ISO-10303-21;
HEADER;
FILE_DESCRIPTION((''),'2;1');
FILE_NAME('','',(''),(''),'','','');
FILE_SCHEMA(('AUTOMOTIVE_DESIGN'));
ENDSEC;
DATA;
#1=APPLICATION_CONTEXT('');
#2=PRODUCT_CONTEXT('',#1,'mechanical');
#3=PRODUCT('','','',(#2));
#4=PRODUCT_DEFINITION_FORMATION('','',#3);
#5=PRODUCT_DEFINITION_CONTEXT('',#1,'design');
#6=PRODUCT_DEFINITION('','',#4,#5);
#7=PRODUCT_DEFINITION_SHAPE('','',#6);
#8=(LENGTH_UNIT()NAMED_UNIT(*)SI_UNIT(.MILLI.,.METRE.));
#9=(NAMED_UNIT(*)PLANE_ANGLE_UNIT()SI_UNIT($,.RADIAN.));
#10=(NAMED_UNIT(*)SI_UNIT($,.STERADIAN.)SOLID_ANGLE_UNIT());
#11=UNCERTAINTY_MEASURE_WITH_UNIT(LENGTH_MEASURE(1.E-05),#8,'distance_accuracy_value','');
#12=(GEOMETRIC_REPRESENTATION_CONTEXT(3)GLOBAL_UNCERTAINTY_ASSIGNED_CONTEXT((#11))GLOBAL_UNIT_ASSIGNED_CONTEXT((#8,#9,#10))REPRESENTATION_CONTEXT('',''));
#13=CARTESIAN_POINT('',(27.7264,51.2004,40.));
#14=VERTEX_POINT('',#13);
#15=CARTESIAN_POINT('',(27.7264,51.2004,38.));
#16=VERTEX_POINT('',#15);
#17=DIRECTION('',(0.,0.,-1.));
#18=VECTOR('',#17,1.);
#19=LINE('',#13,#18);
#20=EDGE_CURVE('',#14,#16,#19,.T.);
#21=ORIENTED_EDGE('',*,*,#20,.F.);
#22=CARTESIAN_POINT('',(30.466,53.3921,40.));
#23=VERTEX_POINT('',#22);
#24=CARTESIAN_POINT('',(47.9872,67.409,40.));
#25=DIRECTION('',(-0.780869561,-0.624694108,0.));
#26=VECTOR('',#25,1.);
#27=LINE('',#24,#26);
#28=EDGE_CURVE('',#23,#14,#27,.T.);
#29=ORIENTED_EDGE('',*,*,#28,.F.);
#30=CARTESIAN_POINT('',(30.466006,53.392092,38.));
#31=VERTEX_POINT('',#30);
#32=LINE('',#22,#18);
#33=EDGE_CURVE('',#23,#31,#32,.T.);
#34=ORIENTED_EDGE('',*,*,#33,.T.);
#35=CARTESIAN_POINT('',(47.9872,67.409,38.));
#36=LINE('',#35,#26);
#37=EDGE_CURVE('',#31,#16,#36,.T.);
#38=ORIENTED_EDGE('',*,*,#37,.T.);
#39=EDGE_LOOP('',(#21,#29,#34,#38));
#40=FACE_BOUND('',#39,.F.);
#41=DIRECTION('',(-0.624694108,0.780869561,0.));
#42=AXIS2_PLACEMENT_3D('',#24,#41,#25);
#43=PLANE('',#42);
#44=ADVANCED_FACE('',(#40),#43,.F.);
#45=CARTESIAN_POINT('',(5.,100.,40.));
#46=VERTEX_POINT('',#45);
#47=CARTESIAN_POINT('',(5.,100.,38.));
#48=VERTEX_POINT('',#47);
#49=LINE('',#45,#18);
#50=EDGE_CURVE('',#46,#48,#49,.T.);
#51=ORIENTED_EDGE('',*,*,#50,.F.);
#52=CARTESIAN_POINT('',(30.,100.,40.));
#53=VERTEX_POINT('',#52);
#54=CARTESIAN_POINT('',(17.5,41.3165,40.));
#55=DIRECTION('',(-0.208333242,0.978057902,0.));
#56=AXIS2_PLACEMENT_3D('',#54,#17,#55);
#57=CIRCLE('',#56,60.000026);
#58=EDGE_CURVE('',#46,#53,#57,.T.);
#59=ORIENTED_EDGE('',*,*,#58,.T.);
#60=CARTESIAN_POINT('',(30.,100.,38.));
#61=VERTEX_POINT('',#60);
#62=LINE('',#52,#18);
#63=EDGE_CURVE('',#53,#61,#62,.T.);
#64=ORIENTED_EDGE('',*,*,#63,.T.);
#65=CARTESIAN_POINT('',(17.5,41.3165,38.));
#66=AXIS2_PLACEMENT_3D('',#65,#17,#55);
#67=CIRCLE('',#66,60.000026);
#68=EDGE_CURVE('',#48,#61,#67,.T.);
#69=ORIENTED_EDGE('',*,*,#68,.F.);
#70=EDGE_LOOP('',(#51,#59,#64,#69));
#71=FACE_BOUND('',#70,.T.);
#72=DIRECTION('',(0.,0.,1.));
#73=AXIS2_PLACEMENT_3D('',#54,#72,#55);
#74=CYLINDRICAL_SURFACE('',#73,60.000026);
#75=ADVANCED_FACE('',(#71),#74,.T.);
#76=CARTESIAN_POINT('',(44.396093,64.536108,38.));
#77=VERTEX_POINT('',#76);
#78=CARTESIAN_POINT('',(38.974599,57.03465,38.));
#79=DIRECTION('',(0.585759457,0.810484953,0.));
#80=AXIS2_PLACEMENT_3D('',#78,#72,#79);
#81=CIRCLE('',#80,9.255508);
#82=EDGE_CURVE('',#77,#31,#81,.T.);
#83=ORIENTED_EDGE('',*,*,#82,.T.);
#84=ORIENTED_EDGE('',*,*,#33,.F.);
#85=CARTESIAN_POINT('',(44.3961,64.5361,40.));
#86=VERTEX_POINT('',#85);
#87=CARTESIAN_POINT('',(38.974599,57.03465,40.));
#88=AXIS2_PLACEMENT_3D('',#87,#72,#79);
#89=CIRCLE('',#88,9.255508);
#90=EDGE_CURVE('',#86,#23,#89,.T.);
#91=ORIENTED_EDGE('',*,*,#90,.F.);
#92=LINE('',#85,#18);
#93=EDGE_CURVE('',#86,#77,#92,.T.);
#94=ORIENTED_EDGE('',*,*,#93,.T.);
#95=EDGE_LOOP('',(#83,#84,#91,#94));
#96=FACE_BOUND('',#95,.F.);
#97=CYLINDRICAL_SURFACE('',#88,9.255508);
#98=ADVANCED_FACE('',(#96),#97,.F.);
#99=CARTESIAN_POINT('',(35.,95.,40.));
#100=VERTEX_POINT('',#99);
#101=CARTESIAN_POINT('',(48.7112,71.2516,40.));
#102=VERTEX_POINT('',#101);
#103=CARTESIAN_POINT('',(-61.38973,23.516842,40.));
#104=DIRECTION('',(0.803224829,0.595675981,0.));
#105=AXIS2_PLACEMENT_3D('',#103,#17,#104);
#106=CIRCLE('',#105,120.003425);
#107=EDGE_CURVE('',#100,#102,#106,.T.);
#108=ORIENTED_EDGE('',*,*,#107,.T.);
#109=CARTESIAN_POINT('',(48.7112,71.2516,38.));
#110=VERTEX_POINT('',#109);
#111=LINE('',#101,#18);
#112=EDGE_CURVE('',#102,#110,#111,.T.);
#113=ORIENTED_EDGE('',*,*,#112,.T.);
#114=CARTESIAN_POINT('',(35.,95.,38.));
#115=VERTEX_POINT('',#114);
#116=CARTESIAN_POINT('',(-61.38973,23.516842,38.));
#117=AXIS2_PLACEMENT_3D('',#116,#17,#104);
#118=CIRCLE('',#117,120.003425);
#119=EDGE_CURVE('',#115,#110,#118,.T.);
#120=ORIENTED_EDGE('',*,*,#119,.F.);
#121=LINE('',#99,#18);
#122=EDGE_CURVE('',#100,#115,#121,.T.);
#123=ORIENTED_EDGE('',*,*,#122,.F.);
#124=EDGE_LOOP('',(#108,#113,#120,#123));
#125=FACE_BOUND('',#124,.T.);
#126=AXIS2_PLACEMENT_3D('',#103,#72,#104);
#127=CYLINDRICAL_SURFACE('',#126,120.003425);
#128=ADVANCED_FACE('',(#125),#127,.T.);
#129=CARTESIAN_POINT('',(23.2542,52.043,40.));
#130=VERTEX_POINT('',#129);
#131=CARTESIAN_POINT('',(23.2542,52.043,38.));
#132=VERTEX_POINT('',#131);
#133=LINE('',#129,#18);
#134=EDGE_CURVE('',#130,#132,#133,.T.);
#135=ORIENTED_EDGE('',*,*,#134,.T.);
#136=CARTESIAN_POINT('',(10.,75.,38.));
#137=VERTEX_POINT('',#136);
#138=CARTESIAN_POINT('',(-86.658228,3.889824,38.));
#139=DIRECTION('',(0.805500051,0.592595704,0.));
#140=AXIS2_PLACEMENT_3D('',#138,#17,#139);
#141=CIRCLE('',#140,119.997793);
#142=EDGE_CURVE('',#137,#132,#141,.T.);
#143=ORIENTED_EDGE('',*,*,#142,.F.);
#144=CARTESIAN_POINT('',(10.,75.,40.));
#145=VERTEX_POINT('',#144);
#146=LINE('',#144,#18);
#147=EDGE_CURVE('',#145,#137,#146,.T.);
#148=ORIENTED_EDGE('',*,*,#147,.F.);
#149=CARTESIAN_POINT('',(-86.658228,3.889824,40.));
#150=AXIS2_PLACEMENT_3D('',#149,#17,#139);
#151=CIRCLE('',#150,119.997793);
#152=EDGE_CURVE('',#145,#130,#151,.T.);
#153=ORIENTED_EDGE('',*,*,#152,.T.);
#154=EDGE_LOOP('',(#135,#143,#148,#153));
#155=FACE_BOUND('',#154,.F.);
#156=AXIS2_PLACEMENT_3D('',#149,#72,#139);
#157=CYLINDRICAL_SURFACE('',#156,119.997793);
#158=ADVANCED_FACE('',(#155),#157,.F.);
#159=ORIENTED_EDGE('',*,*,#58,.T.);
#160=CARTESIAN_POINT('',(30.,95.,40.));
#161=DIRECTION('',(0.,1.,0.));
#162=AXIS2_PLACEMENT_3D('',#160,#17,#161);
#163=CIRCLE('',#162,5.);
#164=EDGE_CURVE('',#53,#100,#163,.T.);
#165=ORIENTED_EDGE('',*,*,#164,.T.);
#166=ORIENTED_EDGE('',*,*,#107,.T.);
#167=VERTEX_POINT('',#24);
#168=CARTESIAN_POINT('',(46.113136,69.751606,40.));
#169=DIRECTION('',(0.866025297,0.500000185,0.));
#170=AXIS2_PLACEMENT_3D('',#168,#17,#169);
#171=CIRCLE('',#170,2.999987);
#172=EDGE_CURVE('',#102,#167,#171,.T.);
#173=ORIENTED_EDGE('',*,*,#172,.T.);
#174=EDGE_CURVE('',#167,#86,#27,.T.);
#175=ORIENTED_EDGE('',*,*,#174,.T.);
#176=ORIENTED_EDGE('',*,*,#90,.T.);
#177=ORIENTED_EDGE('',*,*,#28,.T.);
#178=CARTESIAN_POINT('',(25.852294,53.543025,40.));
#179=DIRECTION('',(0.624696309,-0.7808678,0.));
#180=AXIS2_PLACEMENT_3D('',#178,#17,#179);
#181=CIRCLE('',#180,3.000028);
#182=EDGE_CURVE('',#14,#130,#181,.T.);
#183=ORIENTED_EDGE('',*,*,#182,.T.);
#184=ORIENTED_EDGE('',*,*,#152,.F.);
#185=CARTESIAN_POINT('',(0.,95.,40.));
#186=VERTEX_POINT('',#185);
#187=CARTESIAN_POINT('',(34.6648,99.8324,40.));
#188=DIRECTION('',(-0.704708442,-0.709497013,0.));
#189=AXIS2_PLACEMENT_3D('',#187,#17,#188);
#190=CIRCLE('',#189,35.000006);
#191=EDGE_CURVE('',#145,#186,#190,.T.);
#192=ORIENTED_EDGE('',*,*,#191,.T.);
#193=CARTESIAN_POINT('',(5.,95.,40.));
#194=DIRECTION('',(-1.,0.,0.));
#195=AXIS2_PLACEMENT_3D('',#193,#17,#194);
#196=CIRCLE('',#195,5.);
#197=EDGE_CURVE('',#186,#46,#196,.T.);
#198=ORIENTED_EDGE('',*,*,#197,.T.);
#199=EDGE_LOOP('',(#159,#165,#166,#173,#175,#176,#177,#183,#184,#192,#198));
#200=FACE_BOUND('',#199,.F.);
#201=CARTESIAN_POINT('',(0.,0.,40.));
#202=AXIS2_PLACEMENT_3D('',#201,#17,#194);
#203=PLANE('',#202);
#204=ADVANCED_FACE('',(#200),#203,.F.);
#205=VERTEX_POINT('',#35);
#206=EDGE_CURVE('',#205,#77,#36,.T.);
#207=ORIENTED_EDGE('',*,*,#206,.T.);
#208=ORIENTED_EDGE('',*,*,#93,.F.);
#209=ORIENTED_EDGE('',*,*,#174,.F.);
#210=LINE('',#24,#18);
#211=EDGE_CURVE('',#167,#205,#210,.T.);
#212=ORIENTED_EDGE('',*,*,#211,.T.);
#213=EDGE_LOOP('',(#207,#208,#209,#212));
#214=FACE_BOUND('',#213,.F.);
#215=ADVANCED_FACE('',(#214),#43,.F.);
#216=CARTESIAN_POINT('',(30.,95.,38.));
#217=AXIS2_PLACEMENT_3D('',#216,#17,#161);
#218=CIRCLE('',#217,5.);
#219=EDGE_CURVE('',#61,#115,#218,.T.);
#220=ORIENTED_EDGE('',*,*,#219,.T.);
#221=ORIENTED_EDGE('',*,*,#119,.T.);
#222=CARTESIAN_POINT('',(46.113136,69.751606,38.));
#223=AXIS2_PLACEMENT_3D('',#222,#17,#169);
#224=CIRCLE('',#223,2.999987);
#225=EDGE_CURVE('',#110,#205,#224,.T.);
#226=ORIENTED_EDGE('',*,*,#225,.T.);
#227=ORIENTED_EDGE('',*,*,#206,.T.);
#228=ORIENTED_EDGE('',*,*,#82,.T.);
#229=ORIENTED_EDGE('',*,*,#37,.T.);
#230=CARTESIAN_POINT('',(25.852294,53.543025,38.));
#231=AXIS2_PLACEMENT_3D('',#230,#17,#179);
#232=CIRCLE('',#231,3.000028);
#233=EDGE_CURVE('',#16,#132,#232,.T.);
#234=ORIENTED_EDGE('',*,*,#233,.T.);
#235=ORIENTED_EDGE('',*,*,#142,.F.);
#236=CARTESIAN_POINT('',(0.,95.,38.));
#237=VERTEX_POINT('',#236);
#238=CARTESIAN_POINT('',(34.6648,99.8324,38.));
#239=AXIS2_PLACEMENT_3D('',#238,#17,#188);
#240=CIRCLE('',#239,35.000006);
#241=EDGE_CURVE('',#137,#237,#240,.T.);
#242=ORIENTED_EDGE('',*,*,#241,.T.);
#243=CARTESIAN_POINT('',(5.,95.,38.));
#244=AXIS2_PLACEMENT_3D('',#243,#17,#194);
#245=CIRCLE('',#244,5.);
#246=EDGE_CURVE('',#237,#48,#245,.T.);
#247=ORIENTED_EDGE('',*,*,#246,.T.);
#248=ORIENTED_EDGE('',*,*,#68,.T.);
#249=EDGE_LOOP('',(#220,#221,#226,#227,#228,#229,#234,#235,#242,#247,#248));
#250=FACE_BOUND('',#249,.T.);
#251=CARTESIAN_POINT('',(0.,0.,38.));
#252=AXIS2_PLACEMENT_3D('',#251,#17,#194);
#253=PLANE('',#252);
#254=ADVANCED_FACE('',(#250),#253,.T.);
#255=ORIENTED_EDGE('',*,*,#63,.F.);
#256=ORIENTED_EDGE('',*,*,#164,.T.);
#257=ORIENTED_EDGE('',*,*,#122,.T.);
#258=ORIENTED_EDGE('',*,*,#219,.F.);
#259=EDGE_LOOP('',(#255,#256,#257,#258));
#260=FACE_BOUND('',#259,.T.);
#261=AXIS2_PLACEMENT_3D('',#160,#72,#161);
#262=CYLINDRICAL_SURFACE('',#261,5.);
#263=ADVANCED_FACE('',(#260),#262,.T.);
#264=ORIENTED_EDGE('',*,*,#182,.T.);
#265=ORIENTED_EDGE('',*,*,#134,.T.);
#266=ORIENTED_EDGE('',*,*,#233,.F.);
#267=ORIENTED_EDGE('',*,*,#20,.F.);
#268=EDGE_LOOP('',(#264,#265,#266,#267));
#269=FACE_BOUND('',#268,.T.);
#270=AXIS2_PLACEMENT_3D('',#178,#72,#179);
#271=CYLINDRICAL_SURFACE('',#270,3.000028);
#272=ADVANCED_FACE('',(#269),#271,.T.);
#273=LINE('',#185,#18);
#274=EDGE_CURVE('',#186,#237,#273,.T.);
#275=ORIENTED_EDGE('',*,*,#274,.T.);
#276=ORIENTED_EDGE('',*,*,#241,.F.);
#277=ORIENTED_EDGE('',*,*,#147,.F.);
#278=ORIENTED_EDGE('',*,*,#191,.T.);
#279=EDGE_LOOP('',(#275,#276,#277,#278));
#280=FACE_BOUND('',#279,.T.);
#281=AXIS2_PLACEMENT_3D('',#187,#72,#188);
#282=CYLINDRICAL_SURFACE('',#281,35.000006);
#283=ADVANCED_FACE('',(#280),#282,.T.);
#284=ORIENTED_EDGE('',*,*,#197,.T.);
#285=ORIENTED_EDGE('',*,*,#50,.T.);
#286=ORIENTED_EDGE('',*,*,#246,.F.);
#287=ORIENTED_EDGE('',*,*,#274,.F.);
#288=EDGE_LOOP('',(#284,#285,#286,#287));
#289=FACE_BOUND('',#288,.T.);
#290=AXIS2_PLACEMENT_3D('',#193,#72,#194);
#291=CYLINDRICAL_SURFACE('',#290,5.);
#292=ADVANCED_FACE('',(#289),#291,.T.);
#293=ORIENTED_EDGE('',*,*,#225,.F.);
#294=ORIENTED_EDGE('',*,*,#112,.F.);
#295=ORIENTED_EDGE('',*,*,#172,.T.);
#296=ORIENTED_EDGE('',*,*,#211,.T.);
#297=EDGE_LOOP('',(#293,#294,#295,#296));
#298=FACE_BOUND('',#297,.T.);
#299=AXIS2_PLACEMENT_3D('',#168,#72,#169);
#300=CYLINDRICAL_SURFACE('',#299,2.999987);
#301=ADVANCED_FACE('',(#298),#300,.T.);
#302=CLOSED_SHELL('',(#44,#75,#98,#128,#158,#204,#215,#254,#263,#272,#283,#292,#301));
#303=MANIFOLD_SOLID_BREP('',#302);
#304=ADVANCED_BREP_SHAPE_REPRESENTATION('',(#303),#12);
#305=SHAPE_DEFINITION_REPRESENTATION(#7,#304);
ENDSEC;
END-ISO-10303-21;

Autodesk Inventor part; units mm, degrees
ref_plane "YZ Plane" through (0, 0, 0) normal (1, 0, 0) x (0, 1, 0)
ref_plane "Plano de trabajo14" through (0, 0, 40) normal (0, 0, 1) x (1, 0, 0)
ref_plane "Plano de trabajo15" through (0, 0, 40) normal (0, 0, -1) x (-1, 0, 0)
sketch "Boceto24" plane through (0, 0, 40) normal (0, 0, -1) x (-1, 0, 0)
  arc A0 (0, 95) -> (-5, 100) centre (-5, 95) ccw
  arc A1 (-30, 100) -> (-35, 95) centre (-30, 95) ccw
  arc A2 (-5, 100) -> (-30, 100) centre (-17.5, 41.3165) ccw
  arc A3 (-10, 75) -> (0, 95) centre (-34.6648, 99.8324) ccw
  line L0 (-47.9872, 67.409) -> (-27.7264, 51.2004)
  arc A4 (-27.7264, 51.2004) -> (-23.2542, 52.043) centre (-25.8523, 53.543) ccw
  arc A5 (-48.7112, 71.2516) -> (-47.9872, 67.409) centre (-46.1131, 69.7516) ccw
  arc A6 (-35, 95) -> (-48.7112, 71.2516) centre (61.3869, 23.5187) ccw
  arc A7 (-10, 75) -> (-23.2542, 52.043) centre (86.6601, 3.8886) ccw
  point P0 (0, 0)
  point P1 (0, 100)
  point P2 (-35, 100)
  point P3 (-25, 49.0192)
  point P4 (-50, 69.0192)
extrude "Extrusión16" add sketch "Boceto24" along normal blind 2
sketch "Boceto34" plane through (0, 0, 40) normal (0, 0, 1) x (1, 0, 0)
  line L0 (30.8918, 53.7327) -> (44.3961, 64.5361)
  line L1 (37.8568, 59.3047) -> (40.3278, 59.3047) construction
  line L2 (30.466, 53.3921) -> (44.3961, 64.5361)
  line L3 (30.466, 53.3921) -> (37.431, 58.9641)
  line L4 (37.431, 58.9641) -> (39.902, 58.9641) construction
  arc A0 (44.3961, 64.5361) -> (30.466, 53.3921) centre (38.9746, 57.0346) ccw
  point P0 (0, 0)
extrude "Extrusión26" cut sketch "Boceto34" against normal blind 10
equation "\"Radio_pliegue\" = Grosor"
equation "\"Anchura_desahogo_plegado\" = Grosor"
equation "\"Profundidad_desahogo_plegado\" = 0.5 * Grosor"
equation "\"Tamaño_destalonado\" = 4 * Grosor"
equation "\"Remanente_mínimo\" = 2 * Grosor"
equation "\"Radiodetransición\" = Radio_pliegue"
equation "\"Tamaño_de_radio_de_Jacobi\" = Radio_pliegue"
equation "\"TamañoSeparación\" = Grosor"
equation "\"Grosor\" = 0.5"
properties part number "brazocuadrado"
